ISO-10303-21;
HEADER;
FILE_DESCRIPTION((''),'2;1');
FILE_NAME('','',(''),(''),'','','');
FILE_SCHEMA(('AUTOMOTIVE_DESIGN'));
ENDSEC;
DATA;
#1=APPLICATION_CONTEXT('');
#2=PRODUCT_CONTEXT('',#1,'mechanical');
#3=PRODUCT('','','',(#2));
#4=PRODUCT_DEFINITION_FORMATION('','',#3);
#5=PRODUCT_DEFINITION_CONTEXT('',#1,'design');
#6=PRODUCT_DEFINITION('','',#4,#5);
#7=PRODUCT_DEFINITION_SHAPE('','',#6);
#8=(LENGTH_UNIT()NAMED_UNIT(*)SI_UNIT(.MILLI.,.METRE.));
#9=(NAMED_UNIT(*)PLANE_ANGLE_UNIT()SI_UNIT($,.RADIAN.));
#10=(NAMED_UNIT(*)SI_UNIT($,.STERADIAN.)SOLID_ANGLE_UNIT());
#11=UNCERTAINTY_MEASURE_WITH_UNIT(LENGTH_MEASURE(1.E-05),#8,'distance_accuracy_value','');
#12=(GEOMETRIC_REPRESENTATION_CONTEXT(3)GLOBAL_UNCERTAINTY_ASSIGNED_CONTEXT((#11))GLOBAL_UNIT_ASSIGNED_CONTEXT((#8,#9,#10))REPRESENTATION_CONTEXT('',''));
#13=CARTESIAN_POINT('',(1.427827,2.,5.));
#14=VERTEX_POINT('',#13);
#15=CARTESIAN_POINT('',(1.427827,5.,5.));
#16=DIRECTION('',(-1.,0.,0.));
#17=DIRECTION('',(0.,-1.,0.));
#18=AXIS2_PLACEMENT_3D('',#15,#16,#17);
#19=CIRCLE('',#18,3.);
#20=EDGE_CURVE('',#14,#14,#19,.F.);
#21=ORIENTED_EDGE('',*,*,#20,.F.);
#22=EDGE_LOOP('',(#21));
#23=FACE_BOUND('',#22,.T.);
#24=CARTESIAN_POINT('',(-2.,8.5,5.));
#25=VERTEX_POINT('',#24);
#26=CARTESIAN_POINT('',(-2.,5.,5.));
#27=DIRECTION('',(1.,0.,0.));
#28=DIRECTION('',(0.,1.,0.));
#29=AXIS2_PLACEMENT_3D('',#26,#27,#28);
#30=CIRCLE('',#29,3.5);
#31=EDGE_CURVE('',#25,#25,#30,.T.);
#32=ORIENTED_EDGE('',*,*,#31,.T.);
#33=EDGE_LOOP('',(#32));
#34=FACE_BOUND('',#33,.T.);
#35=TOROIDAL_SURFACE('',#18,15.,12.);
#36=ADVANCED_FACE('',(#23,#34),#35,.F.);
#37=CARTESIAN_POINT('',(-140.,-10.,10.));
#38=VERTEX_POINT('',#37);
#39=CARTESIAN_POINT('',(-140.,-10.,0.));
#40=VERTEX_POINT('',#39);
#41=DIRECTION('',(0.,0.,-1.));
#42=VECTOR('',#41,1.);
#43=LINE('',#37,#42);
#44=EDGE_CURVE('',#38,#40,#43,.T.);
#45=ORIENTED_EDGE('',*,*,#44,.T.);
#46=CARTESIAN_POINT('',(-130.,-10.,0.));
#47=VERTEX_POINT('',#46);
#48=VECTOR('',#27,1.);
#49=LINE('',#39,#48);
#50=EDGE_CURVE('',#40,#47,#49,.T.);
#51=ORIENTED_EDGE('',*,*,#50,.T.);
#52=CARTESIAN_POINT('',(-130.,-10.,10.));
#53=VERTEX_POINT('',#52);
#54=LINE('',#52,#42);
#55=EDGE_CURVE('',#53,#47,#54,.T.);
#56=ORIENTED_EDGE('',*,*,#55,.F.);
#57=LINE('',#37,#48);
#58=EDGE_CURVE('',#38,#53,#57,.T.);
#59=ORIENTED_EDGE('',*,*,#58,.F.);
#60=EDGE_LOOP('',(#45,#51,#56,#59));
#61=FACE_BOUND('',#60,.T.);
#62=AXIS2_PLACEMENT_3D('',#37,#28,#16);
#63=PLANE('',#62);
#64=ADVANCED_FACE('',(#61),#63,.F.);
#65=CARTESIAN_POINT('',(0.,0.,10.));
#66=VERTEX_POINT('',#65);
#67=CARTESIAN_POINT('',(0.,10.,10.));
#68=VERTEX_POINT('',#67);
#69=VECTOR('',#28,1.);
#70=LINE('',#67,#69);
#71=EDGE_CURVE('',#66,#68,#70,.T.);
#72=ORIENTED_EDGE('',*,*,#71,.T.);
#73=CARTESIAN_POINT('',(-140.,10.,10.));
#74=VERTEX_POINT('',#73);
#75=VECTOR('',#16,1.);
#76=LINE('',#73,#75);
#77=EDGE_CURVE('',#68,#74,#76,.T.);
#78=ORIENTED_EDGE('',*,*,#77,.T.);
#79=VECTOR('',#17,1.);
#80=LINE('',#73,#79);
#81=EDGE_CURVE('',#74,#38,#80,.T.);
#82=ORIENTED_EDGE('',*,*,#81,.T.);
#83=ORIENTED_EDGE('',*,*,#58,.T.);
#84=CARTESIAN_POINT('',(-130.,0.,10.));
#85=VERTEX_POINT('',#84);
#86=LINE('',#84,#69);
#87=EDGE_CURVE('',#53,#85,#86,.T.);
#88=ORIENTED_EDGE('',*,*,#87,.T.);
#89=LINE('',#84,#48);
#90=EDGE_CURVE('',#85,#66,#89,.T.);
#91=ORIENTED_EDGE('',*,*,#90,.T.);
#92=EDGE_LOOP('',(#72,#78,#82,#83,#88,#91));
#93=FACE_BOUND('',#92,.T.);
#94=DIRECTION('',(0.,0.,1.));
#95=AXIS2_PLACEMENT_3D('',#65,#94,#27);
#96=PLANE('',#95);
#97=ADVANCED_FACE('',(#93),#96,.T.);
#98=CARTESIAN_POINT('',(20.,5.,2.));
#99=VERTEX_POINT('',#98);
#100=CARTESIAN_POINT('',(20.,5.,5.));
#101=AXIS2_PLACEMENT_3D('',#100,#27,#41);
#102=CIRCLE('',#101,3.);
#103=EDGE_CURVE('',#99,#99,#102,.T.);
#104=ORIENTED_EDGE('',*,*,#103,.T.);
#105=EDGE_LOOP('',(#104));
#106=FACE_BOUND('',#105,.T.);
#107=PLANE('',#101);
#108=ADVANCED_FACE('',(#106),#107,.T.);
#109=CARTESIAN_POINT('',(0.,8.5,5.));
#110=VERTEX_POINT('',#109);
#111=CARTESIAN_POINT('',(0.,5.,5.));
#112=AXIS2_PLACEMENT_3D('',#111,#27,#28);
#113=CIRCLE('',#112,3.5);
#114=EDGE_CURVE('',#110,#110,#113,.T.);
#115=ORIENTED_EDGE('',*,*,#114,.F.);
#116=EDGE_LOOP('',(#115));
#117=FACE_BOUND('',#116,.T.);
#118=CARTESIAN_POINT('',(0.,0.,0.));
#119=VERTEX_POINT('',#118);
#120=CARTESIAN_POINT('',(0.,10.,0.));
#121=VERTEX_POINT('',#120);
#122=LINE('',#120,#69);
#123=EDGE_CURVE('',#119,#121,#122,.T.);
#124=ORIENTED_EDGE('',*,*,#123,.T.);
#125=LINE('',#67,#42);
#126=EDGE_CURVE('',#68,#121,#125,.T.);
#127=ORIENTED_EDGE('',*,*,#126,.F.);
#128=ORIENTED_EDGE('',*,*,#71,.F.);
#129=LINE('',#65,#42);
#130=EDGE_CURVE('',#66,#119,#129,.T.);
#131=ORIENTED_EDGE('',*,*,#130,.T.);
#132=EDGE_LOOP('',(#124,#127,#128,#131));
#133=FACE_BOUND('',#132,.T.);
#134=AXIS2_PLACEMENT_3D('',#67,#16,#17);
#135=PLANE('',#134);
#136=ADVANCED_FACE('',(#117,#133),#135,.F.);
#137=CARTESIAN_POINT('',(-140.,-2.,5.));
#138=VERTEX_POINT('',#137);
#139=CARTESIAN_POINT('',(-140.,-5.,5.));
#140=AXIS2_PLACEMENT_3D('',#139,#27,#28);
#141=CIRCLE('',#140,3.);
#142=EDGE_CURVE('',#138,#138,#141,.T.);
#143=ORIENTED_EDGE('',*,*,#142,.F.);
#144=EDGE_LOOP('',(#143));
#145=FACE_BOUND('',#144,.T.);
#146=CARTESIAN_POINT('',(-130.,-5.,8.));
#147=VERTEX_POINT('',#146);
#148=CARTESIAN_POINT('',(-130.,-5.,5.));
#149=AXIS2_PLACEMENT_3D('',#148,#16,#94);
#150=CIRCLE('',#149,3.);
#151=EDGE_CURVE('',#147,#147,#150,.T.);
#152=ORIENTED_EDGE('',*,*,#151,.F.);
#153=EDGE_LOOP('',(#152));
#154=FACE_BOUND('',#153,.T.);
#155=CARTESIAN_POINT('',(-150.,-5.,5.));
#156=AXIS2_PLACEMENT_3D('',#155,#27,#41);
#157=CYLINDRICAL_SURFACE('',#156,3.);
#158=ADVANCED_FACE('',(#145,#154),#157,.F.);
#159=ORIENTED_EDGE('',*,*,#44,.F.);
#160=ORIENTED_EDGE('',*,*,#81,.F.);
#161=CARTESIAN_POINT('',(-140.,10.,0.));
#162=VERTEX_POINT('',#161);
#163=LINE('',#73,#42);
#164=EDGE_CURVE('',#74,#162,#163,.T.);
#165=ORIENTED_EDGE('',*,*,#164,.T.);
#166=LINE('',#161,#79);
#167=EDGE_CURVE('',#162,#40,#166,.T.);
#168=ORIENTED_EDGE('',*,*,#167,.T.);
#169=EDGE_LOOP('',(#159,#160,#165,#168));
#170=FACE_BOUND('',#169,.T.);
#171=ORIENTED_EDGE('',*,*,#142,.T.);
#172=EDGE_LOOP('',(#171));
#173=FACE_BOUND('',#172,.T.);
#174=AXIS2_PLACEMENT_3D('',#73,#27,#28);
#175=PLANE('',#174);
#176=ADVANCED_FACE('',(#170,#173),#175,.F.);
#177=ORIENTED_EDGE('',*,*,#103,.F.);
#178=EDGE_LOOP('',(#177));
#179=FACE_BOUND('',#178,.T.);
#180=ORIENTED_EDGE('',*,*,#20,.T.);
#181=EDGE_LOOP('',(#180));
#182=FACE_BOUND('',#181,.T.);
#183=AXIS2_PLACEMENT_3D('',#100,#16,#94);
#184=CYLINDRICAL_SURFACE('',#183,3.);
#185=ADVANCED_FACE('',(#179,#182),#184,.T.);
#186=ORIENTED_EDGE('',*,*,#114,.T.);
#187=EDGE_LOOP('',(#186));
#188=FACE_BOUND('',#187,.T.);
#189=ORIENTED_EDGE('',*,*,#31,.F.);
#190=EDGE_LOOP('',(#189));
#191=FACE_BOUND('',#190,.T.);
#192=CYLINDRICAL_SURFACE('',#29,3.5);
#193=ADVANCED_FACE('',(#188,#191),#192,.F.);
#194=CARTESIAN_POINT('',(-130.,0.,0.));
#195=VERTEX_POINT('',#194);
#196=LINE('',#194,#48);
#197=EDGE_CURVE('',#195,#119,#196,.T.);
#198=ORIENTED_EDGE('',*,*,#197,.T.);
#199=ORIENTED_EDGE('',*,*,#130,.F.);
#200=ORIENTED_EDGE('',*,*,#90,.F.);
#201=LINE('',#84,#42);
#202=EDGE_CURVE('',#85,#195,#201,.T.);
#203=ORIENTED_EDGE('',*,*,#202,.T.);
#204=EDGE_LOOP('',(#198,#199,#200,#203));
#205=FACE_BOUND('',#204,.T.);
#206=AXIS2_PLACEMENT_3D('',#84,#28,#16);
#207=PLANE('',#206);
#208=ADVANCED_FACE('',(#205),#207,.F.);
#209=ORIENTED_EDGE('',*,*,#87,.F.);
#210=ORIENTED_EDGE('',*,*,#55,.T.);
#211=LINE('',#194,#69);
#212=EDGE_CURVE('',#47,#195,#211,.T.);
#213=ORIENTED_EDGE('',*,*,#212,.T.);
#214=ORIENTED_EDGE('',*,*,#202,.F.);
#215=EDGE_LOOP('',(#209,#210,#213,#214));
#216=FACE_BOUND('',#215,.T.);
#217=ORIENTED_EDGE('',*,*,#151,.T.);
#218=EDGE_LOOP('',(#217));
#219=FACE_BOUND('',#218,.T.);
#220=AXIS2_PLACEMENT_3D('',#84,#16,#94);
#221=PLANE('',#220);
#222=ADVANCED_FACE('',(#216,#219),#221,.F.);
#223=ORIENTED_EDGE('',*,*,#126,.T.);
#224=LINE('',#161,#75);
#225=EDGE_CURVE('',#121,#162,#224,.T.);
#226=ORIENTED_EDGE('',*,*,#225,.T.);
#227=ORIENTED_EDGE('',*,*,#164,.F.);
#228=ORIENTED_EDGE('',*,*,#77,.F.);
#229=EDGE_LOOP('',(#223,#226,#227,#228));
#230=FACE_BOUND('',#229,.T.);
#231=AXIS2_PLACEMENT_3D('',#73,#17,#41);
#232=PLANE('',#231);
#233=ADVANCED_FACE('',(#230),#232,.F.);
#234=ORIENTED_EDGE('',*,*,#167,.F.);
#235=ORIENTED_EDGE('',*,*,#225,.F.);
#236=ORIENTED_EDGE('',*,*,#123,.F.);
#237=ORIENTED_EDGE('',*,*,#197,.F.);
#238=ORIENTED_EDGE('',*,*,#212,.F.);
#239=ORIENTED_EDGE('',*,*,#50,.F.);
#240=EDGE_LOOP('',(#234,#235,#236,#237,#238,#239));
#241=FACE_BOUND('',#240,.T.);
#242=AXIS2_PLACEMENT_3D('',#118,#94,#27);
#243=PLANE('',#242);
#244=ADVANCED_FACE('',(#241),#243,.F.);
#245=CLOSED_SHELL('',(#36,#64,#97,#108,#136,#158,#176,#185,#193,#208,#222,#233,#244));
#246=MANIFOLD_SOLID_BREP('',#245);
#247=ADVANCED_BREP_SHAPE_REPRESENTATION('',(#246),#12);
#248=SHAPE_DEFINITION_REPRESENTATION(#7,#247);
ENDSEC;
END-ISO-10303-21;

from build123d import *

# Parameters (mm, degrees)
BOSS_EXTRUDE1_DEPTH = 10
SKETCH4_R           = 3
CUT_EXTRUDE2_DEPTH  = 150
SKETCH4_5_R         = 3
BOSS_EXTRUDE3_DEPTH = 20
CUT_EXTRUDE4_START  = -2
SKETCH5_R           = 3.5
SKETCH5_R_2         = 3
CUT_EXTRUDE4_DEPTH  = 2
FILLET2_R           = 12


with BuildPart() as part:
    # Sketch1 → Boss-Extrude1 (new body)
    with BuildSketch(Plane.XY):
        Polygon((-140, 10), (0, 10), (0, 0), (-130, 0), (-130, -10), (-140, -10), align=None)
    extrude(amount=BOSS_EXTRUDE1_DEPTH)

    # Sketch4 → Cut-Extrude2 (cut)
    with BuildSketch(Plane(origin=(0, 0, 0), x_dir=(0, 0, -1), z_dir=(1, 0, 0))):
        with Locations(Location((-5, -5, 0), (0, 0, 90))):
            Circle(SKETCH4_R)
    extrude(amount=-CUT_EXTRUDE2_DEPTH, mode=Mode.SUBTRACT)

    # Sketch4<5> → Boss-Extrude3 (add)
    with BuildSketch(Plane(origin=(0, 0, 0), x_dir=(0, 0, -1), z_dir=(1, 0, 0))):
        with Locations((-5, 5)):
            Circle(SKETCH4_5_R)
    extrude(amount=BOSS_EXTRUDE3_DEPTH)

    # Sketch5 → Cut-Extrude4 (cut)
    with BuildSketch(Plane(origin=(0, 0, 0), x_dir=(0, 0, -1), z_dir=(1, 0, 0)).offset(CUT_EXTRUDE4_START)):
        with Locations(Location((-5, 5, 0), (0, 0, 90))):
            Circle(SKETCH5_R)
        with Locations(Location((-5, 5, 0), (0, 0, 90))):
            Circle(SKETCH5_R_2, mode=Mode.SUBTRACT)
    extrude(amount=CUT_EXTRUDE4_DEPTH, mode=Mode.SUBTRACT)

    # Fillet2
    # the kernel refuses this fillet: 12 mm, written as the material it adds along each edge
    with BuildSketch(Plane(origin=(-2, 5, 5), x_dir=(0, 1, 0), z_dir=(0, 0, -1))) as fillet2_piece_1:
        with BuildLine():
            CenterArc((15, 3.4278273), FILLET2_R, 180, 16.597842136)
            Line((3, 3.4278273), (2.76, 3.4278273))
            Line((2.76, 3.4278273), (2.76, 0))
            Line((2.76, 0), (3, -0.24))
            ThreePointArc((3, -0.24), (3.25, -0.24), (3.27, -0.068556546))
            Line((3.27, -0.068556546), (3.5, 0))
        make_face()
    revolve(axis=Axis((-2, 5, 5), (1, 0, 0)))


solid = part.part
